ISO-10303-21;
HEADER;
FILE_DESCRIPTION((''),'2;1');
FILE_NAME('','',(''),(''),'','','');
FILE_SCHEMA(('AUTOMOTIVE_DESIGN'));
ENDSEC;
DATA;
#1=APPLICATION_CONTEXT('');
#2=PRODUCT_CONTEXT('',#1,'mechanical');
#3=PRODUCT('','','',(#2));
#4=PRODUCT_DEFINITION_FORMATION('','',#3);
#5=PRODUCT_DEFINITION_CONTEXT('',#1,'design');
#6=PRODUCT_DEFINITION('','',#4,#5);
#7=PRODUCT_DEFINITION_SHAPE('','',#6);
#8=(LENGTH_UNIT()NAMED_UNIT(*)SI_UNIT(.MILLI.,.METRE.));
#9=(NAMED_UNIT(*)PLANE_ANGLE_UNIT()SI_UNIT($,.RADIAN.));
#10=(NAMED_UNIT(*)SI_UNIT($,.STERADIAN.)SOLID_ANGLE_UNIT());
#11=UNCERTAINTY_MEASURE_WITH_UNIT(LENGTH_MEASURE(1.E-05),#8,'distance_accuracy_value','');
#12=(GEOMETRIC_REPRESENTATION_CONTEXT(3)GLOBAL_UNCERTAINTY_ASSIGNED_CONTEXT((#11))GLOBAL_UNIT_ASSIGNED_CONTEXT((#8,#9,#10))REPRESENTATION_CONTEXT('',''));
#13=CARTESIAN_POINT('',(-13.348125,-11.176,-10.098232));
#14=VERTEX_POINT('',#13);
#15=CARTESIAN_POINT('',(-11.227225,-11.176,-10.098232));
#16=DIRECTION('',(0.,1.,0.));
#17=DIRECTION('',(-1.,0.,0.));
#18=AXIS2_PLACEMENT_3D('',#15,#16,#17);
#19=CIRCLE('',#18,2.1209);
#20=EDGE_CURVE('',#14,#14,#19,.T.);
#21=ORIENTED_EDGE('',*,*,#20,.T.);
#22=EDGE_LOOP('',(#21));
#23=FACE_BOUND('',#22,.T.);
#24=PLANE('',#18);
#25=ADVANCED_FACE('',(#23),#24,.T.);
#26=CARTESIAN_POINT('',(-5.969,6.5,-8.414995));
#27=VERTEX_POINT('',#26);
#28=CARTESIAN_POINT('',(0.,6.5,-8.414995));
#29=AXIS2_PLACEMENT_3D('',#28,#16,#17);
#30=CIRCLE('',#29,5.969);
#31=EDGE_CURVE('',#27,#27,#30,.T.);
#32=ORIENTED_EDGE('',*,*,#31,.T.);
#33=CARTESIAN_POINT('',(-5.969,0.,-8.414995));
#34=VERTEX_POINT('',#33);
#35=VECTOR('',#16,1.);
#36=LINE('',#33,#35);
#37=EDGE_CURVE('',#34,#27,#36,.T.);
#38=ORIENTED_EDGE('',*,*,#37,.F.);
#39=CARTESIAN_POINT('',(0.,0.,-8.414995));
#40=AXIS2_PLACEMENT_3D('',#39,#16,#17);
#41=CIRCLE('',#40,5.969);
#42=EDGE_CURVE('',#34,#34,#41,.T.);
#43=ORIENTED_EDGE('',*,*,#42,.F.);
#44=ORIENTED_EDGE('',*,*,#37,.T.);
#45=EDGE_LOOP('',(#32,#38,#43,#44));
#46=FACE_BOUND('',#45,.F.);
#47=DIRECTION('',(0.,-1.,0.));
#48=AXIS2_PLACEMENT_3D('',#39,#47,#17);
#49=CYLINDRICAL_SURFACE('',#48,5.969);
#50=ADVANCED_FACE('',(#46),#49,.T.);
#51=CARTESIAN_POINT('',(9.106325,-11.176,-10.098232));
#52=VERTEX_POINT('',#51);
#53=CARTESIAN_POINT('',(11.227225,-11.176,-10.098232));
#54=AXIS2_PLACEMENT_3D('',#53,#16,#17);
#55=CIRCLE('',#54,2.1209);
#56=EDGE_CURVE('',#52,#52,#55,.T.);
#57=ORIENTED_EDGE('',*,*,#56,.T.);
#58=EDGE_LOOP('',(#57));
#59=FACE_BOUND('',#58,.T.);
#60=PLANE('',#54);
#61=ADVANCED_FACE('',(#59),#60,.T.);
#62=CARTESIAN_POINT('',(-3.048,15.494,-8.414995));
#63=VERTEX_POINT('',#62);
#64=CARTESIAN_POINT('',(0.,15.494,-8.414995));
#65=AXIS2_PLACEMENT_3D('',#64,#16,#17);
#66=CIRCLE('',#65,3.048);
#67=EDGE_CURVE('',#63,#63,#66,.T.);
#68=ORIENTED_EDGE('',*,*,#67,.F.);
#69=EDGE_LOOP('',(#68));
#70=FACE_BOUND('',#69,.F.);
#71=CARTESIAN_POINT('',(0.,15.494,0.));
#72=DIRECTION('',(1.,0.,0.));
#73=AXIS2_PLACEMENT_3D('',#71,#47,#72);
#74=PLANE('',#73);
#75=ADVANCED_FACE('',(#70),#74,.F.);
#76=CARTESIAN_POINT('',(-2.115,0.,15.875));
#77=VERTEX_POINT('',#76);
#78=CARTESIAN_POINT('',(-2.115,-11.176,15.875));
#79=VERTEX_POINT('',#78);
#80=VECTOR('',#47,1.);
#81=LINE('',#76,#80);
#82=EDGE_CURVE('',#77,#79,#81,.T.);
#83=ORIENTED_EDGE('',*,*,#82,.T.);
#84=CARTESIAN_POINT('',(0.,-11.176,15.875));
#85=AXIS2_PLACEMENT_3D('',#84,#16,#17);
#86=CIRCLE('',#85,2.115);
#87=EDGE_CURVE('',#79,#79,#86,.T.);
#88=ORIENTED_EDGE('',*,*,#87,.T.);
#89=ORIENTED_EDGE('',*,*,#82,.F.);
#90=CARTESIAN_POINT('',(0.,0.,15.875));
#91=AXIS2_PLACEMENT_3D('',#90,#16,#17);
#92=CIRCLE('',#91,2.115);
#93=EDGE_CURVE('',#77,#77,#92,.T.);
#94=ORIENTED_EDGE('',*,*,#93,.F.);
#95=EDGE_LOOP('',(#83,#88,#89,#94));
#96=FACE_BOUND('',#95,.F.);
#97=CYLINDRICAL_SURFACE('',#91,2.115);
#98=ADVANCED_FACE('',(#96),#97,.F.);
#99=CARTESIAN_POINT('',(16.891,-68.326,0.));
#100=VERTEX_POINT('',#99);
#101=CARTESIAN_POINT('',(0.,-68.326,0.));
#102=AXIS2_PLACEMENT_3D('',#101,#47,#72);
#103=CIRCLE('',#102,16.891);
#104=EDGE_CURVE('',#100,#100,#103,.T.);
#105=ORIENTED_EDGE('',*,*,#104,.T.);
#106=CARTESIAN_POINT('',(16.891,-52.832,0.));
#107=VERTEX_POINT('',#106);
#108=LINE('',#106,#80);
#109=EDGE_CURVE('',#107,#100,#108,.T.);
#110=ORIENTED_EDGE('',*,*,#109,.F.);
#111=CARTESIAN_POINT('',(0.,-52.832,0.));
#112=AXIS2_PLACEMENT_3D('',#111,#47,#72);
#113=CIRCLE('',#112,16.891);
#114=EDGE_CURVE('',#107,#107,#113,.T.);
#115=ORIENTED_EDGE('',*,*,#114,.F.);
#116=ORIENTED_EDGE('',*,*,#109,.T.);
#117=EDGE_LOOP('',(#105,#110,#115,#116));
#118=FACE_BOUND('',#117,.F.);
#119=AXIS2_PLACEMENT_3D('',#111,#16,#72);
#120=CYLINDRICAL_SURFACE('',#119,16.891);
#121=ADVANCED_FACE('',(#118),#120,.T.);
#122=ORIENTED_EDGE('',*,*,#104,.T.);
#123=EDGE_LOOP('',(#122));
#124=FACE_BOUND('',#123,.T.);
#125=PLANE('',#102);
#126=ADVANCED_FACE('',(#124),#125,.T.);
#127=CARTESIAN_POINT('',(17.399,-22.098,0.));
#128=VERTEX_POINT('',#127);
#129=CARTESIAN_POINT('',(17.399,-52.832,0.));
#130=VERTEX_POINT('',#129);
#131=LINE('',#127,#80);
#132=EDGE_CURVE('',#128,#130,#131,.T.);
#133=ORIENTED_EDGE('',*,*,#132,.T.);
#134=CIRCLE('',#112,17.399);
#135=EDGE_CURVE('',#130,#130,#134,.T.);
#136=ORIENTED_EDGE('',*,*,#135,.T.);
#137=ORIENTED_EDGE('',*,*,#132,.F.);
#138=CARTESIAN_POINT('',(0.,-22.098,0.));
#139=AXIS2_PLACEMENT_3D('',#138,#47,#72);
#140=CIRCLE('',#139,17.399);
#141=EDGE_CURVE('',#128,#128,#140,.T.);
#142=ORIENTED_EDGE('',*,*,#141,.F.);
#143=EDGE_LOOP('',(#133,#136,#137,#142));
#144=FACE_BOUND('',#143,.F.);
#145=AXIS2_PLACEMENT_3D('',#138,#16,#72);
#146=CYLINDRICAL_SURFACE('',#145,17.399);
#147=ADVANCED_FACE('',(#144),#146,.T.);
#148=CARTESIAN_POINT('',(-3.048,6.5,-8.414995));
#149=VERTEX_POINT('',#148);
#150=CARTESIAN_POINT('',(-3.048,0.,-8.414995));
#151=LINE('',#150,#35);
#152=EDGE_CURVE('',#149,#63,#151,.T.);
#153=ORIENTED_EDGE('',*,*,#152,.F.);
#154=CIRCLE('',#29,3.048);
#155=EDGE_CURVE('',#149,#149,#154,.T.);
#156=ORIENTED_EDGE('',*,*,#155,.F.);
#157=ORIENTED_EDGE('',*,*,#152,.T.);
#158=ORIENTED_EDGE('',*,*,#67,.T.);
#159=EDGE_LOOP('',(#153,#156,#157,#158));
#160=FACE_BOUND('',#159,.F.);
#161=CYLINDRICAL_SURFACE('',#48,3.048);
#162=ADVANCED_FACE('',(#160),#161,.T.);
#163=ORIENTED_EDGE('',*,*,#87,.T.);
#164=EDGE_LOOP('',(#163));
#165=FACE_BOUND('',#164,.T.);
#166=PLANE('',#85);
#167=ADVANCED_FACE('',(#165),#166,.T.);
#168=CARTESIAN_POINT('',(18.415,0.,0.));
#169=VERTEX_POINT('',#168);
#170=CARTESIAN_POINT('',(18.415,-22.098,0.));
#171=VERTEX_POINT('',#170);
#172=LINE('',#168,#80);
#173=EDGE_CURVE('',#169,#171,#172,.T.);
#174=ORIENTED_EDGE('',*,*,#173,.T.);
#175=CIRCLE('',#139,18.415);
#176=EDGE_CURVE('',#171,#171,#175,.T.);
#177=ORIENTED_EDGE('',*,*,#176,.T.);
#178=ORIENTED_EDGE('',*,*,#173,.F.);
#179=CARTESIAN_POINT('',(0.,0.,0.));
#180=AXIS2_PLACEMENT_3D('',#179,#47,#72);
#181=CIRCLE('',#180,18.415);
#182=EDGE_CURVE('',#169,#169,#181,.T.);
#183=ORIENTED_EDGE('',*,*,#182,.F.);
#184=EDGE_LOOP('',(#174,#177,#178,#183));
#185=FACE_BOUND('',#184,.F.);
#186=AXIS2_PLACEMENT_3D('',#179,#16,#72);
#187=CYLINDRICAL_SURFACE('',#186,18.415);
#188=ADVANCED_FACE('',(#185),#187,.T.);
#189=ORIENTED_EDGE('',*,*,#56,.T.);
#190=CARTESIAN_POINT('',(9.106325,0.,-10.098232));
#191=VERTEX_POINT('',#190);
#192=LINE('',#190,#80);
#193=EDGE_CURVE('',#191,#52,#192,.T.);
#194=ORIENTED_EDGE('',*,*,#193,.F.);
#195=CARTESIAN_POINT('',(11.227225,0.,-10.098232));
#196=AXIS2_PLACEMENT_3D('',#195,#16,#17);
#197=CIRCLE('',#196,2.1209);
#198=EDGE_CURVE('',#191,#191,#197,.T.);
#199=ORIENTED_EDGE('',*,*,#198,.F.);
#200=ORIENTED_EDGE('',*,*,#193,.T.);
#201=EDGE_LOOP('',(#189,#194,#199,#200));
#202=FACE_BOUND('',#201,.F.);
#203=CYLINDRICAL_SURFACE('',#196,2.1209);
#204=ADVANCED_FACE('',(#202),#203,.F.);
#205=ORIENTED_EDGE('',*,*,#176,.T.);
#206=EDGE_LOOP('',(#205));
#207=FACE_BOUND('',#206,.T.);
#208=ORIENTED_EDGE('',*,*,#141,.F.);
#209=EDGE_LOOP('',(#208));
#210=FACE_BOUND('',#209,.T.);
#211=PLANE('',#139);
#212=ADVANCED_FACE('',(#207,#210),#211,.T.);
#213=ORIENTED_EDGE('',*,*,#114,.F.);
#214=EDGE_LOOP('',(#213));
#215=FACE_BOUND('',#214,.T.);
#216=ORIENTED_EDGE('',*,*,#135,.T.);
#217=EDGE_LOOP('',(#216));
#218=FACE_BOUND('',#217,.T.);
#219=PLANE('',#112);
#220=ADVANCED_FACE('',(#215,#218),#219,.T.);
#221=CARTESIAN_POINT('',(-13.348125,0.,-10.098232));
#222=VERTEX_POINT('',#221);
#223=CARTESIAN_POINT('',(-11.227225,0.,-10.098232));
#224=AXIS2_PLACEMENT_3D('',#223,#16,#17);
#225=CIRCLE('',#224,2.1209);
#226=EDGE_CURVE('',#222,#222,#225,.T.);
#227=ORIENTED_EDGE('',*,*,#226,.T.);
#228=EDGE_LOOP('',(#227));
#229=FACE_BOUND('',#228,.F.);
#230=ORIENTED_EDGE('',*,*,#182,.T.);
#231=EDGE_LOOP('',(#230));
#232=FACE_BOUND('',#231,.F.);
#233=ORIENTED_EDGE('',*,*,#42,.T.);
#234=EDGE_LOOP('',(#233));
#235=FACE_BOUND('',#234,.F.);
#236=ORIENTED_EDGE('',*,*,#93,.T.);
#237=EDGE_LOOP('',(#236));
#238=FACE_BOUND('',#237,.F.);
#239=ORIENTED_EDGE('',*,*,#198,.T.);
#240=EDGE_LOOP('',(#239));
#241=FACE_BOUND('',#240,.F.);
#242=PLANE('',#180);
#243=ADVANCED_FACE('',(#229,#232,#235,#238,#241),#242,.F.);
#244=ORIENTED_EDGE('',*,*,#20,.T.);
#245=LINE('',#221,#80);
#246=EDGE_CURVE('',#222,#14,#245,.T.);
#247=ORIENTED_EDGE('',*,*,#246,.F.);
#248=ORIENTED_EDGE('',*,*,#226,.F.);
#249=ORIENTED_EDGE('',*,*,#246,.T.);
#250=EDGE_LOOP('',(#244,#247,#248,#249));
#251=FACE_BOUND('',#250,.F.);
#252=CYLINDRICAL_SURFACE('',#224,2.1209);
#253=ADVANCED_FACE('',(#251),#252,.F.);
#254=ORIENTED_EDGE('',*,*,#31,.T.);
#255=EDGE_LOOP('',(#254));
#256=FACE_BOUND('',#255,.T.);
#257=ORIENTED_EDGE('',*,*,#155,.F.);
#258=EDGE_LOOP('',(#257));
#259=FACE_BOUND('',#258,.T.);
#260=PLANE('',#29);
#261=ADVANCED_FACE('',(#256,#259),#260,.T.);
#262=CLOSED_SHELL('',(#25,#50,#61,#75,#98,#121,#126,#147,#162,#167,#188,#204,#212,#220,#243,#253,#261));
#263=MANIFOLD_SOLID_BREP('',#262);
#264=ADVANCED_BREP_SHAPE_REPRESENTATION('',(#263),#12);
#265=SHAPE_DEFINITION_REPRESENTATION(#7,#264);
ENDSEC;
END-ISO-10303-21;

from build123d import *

# Parameters (mm, degrees)
F0_R      = 18.415
F1_DEPTH  = 22.098
F2_R      = 5.969
F2_R_2    = 3.048
F3_DEPTH  = 6.5
F4_DEPTH  = 15.494
F5_R      = 17.399
F6_DEPTH  = 30.734
F7_R      = 16.891
F8_DEPTH  = 15.494
F9_R      = 2.1209
F9_R_2    = 2.11499958
F10_DEPTH = 11.176


with BuildPart() as f1:
    # F0 (on Front) → F1 (new body)
    with BuildSketch(Plane.XZ):
        Circle(F0_R)
    extrude(amount=F1_DEPTH)

    # F2 (on face) → F3 (join)
    with BuildSketch(Plane(origin=(0, 0, 0), x_dir=(-1, 0, 0), z_dir=(0, 1, 0))):
        with Locations((0, -8.4149946)):
            Circle(F2_R)
        with Locations((0, -8.4149946)):
            Circle(F2_R_2, mode=Mode.SUBTRACT)
    extrude(amount=F3_DEPTH)

    # F4 (add): a face of the model
    f4_faces = [f1.faces().sort_by_distance(p)[0] for p in [
        (0, 0, -8.4149946),
    ]]
    extrude(f4_faces, amount=F4_DEPTH)

    # F5 (on face) → F6 (join)
    with BuildSketch(Plane.XZ.offset(22.098)):
        Circle(F5_R)
    extrude(amount=F6_DEPTH)

    # F7 (on face) → F8 (join)
    with BuildSketch(Plane.XZ.offset(52.832)):
        Circle(F7_R)
    extrude(amount=F8_DEPTH)

    # F9 (on face) → F10 (cut)
    with BuildSketch(Plane(origin=(0, 0, 0), x_dir=(-1, 0, 0), z_dir=(0, 1, 0))):
        with Locations((-11.2272249535, -10.0982319564)):
            Circle(F9_R)
        with Locations((0, 15.875)):
            Circle(F9_R_2)
        with Locations((11.2272249535, -10.0982319564)):
            Circle(F9_R)
    extrude(amount=-F10_DEPTH, mode=Mode.SUBTRACT)


solid = f1.part
